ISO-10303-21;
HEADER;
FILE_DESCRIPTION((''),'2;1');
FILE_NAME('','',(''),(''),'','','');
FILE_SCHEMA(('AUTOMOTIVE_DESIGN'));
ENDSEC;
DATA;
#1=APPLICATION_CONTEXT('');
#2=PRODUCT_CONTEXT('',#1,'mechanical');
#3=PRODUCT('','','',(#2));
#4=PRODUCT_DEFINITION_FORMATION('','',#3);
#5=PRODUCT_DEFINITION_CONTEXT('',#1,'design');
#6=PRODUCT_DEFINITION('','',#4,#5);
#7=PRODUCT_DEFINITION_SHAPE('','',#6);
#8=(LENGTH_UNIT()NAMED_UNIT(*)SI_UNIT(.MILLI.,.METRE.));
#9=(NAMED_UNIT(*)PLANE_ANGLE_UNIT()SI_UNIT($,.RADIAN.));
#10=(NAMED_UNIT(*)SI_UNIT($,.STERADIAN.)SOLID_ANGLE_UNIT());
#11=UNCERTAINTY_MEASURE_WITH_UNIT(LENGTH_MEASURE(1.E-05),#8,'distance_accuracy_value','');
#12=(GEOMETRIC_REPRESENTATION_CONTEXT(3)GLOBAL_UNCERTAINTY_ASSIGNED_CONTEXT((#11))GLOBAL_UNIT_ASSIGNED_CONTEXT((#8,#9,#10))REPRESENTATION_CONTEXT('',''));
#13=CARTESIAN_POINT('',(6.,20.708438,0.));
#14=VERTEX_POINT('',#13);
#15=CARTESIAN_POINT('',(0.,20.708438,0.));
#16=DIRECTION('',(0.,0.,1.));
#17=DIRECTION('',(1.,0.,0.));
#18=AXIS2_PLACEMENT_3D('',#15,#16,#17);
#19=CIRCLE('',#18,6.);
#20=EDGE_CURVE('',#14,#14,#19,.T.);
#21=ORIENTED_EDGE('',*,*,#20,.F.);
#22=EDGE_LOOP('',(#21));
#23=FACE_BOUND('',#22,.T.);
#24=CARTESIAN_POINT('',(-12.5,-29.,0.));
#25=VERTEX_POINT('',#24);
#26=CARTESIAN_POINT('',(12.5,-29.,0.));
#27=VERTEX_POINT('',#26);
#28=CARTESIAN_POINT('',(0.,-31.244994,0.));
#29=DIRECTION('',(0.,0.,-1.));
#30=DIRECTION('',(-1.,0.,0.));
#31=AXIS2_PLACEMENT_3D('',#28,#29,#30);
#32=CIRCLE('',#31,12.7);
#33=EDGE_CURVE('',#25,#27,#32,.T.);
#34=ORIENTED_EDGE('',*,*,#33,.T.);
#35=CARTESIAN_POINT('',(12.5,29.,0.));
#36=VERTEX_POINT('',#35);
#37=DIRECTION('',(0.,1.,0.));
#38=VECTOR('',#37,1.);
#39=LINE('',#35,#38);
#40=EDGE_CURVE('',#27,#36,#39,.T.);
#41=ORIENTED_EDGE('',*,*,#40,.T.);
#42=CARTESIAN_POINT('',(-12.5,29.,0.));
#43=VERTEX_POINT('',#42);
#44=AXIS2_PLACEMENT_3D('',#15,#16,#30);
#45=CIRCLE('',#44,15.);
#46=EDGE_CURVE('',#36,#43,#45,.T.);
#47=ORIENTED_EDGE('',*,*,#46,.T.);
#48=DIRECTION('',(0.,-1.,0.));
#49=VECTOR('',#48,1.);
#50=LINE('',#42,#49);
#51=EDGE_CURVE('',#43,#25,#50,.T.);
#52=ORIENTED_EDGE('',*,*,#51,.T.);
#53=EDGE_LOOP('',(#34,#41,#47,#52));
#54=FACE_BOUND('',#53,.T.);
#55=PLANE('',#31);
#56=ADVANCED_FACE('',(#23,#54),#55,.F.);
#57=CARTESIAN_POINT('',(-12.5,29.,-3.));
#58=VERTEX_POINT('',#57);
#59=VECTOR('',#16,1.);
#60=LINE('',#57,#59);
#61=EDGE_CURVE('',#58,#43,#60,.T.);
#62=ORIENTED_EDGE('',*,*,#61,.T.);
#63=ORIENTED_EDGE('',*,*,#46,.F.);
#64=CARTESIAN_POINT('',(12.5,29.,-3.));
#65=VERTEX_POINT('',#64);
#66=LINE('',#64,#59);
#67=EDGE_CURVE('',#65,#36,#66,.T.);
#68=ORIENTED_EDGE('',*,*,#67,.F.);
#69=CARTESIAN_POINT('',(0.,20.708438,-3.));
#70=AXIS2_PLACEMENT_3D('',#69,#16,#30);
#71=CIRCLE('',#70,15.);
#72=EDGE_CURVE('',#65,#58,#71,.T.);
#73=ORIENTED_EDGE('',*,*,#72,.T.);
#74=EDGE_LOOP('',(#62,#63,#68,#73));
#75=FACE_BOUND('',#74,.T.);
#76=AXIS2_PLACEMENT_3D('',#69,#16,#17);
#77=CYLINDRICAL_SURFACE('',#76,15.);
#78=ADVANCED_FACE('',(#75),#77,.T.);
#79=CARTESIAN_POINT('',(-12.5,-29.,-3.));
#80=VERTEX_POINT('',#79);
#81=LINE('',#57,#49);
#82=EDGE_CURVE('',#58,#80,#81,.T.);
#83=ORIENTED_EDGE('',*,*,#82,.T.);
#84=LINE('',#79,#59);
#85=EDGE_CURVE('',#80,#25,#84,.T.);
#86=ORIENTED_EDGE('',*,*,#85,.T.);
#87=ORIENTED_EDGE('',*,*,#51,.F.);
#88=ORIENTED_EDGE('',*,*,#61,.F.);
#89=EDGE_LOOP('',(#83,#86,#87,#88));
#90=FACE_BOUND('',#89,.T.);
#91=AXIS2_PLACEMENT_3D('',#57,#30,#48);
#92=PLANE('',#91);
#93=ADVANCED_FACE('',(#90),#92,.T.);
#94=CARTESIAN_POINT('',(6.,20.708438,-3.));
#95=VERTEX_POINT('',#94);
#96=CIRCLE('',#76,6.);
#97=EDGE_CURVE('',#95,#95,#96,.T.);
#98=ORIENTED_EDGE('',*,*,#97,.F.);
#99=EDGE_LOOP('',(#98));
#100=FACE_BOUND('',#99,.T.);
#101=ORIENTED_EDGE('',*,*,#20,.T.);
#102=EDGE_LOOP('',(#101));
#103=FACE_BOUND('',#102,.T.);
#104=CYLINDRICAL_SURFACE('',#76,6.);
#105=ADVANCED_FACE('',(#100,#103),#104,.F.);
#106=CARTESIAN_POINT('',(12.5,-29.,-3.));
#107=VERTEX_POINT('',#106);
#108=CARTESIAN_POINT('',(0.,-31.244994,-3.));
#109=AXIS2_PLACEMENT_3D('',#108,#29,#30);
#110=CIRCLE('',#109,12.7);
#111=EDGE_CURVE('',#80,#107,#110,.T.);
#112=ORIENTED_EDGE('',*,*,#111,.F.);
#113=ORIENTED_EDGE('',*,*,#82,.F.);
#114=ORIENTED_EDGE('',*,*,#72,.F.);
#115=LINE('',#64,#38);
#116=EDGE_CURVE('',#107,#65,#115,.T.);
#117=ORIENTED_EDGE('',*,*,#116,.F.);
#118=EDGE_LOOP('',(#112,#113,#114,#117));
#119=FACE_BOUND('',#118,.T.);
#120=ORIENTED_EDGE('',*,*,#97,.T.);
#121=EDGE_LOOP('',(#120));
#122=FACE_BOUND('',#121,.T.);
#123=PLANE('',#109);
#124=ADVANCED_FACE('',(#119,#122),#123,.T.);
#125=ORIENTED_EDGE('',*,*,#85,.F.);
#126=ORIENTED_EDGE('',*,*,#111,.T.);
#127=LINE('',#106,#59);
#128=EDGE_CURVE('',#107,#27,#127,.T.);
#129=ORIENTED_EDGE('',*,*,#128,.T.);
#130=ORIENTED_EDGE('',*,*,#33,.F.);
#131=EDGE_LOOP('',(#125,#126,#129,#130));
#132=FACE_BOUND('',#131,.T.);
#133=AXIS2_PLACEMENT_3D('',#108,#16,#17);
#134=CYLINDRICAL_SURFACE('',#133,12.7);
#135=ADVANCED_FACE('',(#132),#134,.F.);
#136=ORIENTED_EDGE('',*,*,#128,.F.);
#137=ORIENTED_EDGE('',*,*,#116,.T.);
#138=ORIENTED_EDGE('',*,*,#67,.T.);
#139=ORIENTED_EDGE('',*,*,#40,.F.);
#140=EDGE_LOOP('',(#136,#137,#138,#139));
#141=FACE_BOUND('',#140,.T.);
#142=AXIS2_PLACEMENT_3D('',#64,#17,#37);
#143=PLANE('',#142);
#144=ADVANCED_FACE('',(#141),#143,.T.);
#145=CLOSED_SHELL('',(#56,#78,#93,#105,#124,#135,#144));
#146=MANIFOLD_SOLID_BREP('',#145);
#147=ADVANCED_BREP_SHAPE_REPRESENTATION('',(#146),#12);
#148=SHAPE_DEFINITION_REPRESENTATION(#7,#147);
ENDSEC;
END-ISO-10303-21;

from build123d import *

# Parameters (mm, degrees)
SKETCH1_R          = 6
BASE_FLANGE1_DEPTH = 3


# Sheet-metal steps are written as plain solids
with BuildPart() as part:
    # Sketch1 → Base-Flange1 (new body)
    with BuildSketch(Plane.XY):
        with BuildLine():
            Line((-12.5, 29), (-12.5, -29))
            ThreePointArc((-12.5, -29), (0, -18.544994432), (12.5, -29))
            Line((12.5, -29), (12.5, 29))
            ThreePointArc((12.5, 29), (0, 35.708438024), (-12.5, 29))
        make_face()
        with Locations((0, 20.708438024)):
            Circle(SKETCH1_R, mode=Mode.SUBTRACT)
    extrude(amount=-BASE_FLANGE1_DEPTH)


solid = part.part
